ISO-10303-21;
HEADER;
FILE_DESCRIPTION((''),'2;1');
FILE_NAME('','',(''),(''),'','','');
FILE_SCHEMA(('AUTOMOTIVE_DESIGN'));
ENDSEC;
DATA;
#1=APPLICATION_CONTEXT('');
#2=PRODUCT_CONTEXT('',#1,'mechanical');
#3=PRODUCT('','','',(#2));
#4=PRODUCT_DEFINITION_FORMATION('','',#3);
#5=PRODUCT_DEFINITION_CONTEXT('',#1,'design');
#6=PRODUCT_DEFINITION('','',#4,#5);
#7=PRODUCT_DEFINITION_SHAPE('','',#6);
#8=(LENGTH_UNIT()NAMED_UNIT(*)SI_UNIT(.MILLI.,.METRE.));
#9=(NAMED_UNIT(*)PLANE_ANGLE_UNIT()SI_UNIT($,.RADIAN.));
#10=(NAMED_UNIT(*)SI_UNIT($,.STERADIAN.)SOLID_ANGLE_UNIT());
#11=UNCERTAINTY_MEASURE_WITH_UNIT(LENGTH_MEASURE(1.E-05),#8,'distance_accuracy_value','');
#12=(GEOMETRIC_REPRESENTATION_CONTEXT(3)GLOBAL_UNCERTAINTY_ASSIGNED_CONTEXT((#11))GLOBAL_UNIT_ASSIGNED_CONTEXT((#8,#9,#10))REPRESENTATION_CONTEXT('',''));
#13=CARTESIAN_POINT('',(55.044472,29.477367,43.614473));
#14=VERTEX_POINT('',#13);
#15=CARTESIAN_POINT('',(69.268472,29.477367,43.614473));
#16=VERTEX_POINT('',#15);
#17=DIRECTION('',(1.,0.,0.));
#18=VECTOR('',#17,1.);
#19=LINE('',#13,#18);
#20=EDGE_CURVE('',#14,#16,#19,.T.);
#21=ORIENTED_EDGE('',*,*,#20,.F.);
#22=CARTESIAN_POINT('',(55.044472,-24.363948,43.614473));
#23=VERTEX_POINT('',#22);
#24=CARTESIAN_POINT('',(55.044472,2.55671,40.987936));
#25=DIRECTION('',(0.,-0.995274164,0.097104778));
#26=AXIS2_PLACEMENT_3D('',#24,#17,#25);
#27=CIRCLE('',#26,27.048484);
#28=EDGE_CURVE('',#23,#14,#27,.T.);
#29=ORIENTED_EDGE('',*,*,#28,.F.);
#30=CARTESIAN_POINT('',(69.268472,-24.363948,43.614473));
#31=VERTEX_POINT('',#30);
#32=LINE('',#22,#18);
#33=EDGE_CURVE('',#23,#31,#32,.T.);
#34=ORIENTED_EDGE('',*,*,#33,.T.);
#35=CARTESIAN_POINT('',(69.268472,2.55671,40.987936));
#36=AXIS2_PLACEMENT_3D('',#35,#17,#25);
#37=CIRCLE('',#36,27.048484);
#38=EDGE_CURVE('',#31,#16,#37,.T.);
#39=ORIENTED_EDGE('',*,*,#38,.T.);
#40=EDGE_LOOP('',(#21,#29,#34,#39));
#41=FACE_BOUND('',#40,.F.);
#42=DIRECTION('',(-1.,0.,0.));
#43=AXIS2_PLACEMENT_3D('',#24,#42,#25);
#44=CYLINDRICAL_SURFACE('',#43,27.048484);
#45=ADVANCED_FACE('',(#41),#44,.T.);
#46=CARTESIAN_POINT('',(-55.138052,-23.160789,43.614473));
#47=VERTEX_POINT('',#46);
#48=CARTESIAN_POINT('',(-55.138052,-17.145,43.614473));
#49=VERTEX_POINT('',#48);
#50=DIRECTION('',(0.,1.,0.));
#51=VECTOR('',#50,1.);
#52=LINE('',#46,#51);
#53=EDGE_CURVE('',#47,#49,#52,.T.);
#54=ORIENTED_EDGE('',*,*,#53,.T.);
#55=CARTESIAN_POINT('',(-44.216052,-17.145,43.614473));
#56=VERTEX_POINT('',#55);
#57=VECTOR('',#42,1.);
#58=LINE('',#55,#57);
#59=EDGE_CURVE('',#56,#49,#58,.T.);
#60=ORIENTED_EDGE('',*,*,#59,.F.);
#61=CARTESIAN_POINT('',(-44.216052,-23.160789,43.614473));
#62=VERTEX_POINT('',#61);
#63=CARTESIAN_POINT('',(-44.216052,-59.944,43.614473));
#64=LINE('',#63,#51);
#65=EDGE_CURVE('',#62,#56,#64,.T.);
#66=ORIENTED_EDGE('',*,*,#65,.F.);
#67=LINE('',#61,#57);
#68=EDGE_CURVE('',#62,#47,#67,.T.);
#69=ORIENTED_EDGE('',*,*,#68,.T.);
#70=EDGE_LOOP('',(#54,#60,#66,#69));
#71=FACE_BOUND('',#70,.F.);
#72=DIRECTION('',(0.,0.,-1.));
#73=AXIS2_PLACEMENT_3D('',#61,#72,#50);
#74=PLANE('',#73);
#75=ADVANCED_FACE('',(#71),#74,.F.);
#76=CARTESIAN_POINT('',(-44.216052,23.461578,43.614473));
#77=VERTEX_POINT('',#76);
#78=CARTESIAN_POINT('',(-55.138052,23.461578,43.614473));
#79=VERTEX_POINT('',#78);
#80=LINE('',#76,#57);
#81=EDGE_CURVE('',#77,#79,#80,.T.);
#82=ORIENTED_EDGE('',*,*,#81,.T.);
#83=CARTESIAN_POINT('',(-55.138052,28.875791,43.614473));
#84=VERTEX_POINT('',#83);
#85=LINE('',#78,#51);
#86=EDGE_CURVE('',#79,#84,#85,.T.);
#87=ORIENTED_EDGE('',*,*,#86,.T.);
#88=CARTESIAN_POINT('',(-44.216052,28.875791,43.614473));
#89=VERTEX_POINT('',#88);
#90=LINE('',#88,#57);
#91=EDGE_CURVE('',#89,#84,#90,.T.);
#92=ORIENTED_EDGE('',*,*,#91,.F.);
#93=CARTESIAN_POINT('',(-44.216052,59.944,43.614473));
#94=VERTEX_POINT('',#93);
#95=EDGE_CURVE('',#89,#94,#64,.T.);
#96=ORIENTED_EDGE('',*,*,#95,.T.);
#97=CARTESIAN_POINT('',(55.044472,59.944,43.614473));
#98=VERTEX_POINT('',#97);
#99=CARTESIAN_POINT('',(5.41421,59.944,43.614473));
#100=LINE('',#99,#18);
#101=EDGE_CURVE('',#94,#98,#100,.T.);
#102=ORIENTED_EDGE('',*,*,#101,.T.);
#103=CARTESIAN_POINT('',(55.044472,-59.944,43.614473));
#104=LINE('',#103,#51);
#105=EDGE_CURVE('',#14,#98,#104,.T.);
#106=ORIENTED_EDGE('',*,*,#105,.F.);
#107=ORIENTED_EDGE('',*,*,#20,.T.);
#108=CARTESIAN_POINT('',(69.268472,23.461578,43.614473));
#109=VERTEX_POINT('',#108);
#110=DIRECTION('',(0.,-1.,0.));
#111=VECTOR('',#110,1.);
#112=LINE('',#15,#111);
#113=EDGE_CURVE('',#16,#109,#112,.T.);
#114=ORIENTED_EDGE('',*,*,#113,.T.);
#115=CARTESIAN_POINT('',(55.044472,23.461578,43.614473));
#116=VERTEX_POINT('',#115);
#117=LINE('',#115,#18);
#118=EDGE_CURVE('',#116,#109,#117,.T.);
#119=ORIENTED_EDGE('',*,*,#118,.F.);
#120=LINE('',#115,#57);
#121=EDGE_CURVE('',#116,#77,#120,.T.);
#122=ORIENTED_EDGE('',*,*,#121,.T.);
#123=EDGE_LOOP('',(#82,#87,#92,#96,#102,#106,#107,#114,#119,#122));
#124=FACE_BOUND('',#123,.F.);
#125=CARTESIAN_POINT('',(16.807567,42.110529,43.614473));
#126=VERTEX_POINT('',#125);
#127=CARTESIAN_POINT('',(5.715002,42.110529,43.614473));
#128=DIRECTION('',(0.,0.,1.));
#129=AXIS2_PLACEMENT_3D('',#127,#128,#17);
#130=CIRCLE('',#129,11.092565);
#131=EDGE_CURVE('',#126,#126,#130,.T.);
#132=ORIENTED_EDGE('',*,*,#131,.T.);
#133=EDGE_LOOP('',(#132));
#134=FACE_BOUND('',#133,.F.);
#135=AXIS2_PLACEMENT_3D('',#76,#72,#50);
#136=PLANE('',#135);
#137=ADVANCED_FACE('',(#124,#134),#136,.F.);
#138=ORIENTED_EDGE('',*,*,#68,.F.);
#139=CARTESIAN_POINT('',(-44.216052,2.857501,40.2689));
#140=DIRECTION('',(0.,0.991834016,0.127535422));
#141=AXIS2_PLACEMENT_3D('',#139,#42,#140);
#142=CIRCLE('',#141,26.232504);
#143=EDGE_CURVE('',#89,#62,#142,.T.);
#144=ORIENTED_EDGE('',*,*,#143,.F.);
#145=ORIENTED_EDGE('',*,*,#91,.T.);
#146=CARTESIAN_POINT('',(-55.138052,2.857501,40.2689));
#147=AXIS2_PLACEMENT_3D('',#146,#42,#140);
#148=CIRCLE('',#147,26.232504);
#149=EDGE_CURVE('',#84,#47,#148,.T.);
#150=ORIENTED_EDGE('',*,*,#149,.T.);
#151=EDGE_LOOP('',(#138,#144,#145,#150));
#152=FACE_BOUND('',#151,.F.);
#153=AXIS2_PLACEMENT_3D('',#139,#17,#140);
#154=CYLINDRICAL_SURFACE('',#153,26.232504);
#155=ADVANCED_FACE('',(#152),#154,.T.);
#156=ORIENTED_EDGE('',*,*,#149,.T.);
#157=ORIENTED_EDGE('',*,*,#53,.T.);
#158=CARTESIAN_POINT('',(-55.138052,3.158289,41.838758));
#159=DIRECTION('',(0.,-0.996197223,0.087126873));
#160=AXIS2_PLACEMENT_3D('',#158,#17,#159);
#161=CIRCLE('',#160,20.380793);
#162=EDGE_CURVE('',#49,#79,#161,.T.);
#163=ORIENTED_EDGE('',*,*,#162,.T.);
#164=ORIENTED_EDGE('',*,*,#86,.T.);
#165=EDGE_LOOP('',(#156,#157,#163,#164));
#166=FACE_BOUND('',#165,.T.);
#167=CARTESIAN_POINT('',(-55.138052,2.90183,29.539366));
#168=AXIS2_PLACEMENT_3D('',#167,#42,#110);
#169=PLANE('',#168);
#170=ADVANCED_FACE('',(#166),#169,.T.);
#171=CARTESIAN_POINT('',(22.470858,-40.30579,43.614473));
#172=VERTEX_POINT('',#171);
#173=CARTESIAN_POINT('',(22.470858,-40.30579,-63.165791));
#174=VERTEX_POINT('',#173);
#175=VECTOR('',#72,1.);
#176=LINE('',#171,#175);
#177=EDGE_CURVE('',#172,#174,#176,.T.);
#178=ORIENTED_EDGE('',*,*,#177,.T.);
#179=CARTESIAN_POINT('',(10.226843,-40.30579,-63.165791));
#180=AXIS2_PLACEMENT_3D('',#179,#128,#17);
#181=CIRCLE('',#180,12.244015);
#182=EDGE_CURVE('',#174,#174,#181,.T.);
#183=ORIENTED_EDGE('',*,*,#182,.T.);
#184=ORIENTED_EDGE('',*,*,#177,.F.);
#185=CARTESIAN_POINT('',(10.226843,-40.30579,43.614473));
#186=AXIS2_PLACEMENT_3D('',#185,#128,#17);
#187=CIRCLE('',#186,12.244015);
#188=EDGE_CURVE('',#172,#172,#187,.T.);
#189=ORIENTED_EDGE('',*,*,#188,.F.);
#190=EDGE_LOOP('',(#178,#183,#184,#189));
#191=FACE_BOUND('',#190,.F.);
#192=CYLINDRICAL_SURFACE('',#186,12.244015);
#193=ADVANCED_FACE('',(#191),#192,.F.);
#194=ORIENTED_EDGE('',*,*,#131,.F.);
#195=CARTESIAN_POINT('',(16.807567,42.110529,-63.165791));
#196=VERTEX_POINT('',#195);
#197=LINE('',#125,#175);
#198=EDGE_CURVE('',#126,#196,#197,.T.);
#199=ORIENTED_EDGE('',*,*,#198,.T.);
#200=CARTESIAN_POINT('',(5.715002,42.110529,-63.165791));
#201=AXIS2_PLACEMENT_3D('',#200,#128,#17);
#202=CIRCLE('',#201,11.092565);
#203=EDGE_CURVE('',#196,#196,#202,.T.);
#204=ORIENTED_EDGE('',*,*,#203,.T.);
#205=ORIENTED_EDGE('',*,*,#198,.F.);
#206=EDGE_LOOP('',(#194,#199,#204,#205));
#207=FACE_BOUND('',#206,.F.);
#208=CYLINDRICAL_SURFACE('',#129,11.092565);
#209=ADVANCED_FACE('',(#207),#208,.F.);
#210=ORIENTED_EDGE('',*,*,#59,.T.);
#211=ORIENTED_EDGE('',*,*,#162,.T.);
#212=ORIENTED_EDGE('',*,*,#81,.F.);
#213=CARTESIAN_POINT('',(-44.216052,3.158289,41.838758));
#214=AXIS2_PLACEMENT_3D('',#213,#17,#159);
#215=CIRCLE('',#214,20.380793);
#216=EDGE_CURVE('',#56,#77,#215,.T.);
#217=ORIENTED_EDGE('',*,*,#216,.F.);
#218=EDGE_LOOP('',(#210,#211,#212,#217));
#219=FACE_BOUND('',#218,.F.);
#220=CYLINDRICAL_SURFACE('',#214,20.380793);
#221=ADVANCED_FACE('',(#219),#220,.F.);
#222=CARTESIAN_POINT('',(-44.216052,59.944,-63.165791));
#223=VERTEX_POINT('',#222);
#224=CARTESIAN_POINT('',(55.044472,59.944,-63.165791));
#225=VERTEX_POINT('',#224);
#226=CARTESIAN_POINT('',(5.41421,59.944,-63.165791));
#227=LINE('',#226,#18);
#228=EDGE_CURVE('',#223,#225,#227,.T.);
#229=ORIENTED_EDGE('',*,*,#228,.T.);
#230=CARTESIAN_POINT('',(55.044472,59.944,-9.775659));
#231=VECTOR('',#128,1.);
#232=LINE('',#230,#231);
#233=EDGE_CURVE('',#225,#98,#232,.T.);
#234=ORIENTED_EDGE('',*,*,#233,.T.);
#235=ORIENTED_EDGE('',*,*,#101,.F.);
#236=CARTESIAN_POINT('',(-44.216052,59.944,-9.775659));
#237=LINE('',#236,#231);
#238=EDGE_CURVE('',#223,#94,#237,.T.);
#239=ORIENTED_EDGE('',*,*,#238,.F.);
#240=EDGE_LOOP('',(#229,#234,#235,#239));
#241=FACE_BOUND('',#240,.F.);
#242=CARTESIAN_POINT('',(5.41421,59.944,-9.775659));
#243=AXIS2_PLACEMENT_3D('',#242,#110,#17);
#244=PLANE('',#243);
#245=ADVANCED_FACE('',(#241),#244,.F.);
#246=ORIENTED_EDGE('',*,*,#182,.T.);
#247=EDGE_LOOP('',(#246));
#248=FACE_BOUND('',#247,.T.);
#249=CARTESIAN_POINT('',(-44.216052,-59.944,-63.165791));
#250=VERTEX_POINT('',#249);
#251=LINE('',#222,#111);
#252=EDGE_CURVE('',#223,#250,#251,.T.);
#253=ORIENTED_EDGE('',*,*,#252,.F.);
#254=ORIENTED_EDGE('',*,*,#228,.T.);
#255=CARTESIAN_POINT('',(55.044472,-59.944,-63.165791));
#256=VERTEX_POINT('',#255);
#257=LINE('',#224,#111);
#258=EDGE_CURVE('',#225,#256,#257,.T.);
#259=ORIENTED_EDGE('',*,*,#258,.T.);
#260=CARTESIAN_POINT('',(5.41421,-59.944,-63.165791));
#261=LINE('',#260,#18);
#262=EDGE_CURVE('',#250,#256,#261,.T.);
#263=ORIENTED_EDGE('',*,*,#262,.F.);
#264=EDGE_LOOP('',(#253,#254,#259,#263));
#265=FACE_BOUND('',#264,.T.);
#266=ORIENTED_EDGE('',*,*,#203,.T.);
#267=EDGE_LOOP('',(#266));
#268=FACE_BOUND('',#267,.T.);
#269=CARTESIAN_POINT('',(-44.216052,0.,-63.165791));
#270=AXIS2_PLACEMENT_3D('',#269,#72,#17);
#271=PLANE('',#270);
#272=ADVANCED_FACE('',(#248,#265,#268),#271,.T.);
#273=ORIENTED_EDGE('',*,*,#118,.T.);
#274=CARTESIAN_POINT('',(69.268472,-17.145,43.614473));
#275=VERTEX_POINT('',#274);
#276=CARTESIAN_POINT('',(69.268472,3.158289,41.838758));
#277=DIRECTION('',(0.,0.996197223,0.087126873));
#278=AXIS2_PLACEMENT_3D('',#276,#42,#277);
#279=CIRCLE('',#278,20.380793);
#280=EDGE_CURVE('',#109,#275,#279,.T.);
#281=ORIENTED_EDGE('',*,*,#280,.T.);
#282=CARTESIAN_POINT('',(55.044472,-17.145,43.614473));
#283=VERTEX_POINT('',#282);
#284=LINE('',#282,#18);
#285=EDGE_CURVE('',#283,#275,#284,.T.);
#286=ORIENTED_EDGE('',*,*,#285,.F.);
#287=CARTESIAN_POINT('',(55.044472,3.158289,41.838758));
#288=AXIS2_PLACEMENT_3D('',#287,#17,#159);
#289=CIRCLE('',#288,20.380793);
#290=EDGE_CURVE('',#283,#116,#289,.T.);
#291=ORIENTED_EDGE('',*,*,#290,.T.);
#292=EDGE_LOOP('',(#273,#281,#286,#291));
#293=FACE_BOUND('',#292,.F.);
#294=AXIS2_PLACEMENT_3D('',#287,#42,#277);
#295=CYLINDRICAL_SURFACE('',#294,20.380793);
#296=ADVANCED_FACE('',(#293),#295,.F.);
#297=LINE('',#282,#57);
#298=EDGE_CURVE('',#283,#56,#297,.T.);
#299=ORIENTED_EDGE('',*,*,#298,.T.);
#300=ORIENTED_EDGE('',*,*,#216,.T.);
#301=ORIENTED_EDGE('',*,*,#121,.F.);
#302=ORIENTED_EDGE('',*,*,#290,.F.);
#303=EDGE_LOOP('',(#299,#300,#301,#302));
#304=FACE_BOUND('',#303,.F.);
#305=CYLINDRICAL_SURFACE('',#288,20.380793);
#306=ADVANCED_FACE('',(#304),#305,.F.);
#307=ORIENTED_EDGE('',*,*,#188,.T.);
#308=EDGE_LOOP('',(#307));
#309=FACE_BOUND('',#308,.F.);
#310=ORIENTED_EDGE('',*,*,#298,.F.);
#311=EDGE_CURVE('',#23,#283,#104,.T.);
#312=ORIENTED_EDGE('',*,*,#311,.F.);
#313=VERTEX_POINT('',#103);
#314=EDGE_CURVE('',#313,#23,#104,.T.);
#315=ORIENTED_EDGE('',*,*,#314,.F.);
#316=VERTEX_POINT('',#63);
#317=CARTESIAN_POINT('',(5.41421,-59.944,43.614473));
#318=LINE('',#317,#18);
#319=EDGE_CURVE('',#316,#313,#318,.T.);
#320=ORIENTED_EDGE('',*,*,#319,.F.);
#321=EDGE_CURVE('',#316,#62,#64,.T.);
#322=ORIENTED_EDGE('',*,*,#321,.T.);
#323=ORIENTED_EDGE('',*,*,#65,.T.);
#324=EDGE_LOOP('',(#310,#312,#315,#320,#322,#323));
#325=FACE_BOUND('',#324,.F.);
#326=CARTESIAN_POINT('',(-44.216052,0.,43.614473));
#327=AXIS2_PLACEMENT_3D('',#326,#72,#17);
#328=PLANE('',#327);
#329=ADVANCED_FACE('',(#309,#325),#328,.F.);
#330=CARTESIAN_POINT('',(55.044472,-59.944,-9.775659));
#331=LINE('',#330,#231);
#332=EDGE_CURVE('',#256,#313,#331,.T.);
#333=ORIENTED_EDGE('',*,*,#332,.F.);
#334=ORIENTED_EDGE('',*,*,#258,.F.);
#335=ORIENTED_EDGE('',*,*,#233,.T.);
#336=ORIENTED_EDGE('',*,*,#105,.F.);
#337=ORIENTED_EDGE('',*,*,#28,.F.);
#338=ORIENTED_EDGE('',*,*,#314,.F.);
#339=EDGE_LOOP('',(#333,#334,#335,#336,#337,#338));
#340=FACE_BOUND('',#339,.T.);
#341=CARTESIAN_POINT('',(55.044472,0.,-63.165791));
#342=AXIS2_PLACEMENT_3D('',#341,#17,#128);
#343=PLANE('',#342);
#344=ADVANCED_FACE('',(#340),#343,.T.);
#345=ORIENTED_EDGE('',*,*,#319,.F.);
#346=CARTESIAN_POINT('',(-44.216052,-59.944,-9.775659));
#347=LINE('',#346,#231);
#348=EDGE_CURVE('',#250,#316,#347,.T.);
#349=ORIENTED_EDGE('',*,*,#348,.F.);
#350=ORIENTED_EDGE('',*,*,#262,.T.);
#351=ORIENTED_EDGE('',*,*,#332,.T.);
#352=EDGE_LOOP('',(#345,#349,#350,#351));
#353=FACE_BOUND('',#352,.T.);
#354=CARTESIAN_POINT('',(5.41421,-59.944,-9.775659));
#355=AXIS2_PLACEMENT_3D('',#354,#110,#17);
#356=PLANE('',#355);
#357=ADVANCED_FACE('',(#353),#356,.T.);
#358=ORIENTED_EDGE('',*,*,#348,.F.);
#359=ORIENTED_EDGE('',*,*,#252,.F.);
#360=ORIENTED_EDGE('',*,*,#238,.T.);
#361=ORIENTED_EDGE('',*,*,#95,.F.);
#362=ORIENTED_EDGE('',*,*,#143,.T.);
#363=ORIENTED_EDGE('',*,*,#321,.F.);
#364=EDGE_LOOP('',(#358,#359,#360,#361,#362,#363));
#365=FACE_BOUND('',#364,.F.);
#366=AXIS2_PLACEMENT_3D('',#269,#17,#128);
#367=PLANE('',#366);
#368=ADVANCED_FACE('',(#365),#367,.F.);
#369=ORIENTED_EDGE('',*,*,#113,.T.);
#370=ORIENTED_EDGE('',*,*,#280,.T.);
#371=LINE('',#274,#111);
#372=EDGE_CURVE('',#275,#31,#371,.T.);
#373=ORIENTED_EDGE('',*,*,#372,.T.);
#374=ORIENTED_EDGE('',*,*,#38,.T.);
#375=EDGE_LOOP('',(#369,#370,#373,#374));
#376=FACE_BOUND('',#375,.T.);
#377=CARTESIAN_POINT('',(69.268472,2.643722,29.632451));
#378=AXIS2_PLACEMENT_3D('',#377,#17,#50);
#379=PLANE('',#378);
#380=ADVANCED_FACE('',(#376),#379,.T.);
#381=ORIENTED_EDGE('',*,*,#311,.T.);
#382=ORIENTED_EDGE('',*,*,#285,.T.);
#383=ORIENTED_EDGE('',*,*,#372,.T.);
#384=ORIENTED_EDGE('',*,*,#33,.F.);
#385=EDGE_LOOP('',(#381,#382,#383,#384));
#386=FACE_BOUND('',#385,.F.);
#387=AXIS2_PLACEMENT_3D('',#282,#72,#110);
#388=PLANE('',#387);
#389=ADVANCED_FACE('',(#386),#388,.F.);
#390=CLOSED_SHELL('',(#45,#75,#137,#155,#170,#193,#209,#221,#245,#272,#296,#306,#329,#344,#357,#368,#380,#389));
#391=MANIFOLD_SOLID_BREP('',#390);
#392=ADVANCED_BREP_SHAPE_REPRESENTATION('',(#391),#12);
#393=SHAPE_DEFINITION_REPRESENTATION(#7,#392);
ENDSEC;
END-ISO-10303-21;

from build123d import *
from build123d import SkipClean  # not in build123d's __all__

# Parameters (mm, degrees)
F0_W     = 99.2605239153
F0_H     = 106.7802645266
F1_DEPTH = 59.944
F3_DEPTH = 99.2615239153
F5_DEPTH = 14.224
F7_DEPTH = 10.922
F8_R     = 11.0925650774
F8_R_2   = 12.2440148534
F9_DEPTH = 106.7812645266


# Not quite as in the source:
# - after a boolean that leaves OpenCascade's solid faulty, fix() repairs it


with BuildPart() as f1:
    # F0 (on Front) → F1 (new body, symmetric)
    with BuildSketch(Plane.XZ):
        with Locations((5.4142102599, -9.7756590694)):
            Rectangle(F0_W, F0_H)
    extrude(amount=F1_DEPTH, both=True)

    # F2 (on face) → F3 (cut, through all)
    with BuildSketch(Plane.YZ.offset(55.0444722176)):
        with BuildLine():
            Line((23.4615784138, 43.6144731939), (-17.1450003982, 43.6144731939))
            ThreePointArc((-17.1450003982, 43.6144731939), (3.1582890078, 21.4579654327), (23.4615784138, 43.6144731939))
        make_face()
    extrude(amount=-F3_DEPTH, mode=Mode.SUBTRACT)

    # F4 (on face) → F5 (join)
    with BuildSketch(Plane.YZ.offset(55.0444722176)):
        with BuildLine():
            Line((-17.1450003982, 43.6144731939), (-24.3639480323, 43.6144731939))
            ThreePointArc((-24.3639480323, 43.6144731939), (2.5567095727, 13.9394518293), (29.4773671776, 43.6144731939))
            Line((29.4773671776, 43.6144731939), (23.4615784138, 43.6144731939))
            ThreePointArc((23.4615784138, 43.6144731939), (3.1582890078, 21.4579654327), (-17.1450003982, 43.6144731939))
        make_face()
    with SkipClean():  # cleaning this boolean's faces spoils the solid; the shape is the same uncleaned
        extrude(amount=F5_DEPTH)

    # F6 (on face) → F7 (join)
    with BuildSketch(Plane(origin=(-44.2160516977, 0, 0), x_dir=(0, -1, 0), z_dir=(-1, 0, 0))):
        with BuildLine():
            Line((-23.4615784138, 43.6144731939), (-28.8757905364, 43.6144731939))
            ThreePointArc((-28.8757905364, 43.6144731939), (-2.8575006872, 14.036395677), (23.1607891619, 43.6144731939))
            Line((23.1607891619, 43.6144731939), (17.1450003982, 43.6144731939))
            ThreePointArc((17.1450003982, 43.6144731939), (-3.1582890078, 21.4579654327), (-23.4615784138, 43.6144731939))
        make_face()
    extrude(amount=F7_DEPTH)

    add(f1.part.fix(), mode=Mode.REPLACE)

    # F8 (on face) → F9 (cut, through all)
    with BuildSketch(Plane.XY.offset(43.6144731939)):
        with Locations((5.7150018401, 42.1105287969)):
            Circle(F8_R)
        with Locations((10.2268429473, -40.3057895601)):
            Circle(F8_R_2)
    extrude(amount=-F9_DEPTH, mode=Mode.SUBTRACT)


solid = f1.part
